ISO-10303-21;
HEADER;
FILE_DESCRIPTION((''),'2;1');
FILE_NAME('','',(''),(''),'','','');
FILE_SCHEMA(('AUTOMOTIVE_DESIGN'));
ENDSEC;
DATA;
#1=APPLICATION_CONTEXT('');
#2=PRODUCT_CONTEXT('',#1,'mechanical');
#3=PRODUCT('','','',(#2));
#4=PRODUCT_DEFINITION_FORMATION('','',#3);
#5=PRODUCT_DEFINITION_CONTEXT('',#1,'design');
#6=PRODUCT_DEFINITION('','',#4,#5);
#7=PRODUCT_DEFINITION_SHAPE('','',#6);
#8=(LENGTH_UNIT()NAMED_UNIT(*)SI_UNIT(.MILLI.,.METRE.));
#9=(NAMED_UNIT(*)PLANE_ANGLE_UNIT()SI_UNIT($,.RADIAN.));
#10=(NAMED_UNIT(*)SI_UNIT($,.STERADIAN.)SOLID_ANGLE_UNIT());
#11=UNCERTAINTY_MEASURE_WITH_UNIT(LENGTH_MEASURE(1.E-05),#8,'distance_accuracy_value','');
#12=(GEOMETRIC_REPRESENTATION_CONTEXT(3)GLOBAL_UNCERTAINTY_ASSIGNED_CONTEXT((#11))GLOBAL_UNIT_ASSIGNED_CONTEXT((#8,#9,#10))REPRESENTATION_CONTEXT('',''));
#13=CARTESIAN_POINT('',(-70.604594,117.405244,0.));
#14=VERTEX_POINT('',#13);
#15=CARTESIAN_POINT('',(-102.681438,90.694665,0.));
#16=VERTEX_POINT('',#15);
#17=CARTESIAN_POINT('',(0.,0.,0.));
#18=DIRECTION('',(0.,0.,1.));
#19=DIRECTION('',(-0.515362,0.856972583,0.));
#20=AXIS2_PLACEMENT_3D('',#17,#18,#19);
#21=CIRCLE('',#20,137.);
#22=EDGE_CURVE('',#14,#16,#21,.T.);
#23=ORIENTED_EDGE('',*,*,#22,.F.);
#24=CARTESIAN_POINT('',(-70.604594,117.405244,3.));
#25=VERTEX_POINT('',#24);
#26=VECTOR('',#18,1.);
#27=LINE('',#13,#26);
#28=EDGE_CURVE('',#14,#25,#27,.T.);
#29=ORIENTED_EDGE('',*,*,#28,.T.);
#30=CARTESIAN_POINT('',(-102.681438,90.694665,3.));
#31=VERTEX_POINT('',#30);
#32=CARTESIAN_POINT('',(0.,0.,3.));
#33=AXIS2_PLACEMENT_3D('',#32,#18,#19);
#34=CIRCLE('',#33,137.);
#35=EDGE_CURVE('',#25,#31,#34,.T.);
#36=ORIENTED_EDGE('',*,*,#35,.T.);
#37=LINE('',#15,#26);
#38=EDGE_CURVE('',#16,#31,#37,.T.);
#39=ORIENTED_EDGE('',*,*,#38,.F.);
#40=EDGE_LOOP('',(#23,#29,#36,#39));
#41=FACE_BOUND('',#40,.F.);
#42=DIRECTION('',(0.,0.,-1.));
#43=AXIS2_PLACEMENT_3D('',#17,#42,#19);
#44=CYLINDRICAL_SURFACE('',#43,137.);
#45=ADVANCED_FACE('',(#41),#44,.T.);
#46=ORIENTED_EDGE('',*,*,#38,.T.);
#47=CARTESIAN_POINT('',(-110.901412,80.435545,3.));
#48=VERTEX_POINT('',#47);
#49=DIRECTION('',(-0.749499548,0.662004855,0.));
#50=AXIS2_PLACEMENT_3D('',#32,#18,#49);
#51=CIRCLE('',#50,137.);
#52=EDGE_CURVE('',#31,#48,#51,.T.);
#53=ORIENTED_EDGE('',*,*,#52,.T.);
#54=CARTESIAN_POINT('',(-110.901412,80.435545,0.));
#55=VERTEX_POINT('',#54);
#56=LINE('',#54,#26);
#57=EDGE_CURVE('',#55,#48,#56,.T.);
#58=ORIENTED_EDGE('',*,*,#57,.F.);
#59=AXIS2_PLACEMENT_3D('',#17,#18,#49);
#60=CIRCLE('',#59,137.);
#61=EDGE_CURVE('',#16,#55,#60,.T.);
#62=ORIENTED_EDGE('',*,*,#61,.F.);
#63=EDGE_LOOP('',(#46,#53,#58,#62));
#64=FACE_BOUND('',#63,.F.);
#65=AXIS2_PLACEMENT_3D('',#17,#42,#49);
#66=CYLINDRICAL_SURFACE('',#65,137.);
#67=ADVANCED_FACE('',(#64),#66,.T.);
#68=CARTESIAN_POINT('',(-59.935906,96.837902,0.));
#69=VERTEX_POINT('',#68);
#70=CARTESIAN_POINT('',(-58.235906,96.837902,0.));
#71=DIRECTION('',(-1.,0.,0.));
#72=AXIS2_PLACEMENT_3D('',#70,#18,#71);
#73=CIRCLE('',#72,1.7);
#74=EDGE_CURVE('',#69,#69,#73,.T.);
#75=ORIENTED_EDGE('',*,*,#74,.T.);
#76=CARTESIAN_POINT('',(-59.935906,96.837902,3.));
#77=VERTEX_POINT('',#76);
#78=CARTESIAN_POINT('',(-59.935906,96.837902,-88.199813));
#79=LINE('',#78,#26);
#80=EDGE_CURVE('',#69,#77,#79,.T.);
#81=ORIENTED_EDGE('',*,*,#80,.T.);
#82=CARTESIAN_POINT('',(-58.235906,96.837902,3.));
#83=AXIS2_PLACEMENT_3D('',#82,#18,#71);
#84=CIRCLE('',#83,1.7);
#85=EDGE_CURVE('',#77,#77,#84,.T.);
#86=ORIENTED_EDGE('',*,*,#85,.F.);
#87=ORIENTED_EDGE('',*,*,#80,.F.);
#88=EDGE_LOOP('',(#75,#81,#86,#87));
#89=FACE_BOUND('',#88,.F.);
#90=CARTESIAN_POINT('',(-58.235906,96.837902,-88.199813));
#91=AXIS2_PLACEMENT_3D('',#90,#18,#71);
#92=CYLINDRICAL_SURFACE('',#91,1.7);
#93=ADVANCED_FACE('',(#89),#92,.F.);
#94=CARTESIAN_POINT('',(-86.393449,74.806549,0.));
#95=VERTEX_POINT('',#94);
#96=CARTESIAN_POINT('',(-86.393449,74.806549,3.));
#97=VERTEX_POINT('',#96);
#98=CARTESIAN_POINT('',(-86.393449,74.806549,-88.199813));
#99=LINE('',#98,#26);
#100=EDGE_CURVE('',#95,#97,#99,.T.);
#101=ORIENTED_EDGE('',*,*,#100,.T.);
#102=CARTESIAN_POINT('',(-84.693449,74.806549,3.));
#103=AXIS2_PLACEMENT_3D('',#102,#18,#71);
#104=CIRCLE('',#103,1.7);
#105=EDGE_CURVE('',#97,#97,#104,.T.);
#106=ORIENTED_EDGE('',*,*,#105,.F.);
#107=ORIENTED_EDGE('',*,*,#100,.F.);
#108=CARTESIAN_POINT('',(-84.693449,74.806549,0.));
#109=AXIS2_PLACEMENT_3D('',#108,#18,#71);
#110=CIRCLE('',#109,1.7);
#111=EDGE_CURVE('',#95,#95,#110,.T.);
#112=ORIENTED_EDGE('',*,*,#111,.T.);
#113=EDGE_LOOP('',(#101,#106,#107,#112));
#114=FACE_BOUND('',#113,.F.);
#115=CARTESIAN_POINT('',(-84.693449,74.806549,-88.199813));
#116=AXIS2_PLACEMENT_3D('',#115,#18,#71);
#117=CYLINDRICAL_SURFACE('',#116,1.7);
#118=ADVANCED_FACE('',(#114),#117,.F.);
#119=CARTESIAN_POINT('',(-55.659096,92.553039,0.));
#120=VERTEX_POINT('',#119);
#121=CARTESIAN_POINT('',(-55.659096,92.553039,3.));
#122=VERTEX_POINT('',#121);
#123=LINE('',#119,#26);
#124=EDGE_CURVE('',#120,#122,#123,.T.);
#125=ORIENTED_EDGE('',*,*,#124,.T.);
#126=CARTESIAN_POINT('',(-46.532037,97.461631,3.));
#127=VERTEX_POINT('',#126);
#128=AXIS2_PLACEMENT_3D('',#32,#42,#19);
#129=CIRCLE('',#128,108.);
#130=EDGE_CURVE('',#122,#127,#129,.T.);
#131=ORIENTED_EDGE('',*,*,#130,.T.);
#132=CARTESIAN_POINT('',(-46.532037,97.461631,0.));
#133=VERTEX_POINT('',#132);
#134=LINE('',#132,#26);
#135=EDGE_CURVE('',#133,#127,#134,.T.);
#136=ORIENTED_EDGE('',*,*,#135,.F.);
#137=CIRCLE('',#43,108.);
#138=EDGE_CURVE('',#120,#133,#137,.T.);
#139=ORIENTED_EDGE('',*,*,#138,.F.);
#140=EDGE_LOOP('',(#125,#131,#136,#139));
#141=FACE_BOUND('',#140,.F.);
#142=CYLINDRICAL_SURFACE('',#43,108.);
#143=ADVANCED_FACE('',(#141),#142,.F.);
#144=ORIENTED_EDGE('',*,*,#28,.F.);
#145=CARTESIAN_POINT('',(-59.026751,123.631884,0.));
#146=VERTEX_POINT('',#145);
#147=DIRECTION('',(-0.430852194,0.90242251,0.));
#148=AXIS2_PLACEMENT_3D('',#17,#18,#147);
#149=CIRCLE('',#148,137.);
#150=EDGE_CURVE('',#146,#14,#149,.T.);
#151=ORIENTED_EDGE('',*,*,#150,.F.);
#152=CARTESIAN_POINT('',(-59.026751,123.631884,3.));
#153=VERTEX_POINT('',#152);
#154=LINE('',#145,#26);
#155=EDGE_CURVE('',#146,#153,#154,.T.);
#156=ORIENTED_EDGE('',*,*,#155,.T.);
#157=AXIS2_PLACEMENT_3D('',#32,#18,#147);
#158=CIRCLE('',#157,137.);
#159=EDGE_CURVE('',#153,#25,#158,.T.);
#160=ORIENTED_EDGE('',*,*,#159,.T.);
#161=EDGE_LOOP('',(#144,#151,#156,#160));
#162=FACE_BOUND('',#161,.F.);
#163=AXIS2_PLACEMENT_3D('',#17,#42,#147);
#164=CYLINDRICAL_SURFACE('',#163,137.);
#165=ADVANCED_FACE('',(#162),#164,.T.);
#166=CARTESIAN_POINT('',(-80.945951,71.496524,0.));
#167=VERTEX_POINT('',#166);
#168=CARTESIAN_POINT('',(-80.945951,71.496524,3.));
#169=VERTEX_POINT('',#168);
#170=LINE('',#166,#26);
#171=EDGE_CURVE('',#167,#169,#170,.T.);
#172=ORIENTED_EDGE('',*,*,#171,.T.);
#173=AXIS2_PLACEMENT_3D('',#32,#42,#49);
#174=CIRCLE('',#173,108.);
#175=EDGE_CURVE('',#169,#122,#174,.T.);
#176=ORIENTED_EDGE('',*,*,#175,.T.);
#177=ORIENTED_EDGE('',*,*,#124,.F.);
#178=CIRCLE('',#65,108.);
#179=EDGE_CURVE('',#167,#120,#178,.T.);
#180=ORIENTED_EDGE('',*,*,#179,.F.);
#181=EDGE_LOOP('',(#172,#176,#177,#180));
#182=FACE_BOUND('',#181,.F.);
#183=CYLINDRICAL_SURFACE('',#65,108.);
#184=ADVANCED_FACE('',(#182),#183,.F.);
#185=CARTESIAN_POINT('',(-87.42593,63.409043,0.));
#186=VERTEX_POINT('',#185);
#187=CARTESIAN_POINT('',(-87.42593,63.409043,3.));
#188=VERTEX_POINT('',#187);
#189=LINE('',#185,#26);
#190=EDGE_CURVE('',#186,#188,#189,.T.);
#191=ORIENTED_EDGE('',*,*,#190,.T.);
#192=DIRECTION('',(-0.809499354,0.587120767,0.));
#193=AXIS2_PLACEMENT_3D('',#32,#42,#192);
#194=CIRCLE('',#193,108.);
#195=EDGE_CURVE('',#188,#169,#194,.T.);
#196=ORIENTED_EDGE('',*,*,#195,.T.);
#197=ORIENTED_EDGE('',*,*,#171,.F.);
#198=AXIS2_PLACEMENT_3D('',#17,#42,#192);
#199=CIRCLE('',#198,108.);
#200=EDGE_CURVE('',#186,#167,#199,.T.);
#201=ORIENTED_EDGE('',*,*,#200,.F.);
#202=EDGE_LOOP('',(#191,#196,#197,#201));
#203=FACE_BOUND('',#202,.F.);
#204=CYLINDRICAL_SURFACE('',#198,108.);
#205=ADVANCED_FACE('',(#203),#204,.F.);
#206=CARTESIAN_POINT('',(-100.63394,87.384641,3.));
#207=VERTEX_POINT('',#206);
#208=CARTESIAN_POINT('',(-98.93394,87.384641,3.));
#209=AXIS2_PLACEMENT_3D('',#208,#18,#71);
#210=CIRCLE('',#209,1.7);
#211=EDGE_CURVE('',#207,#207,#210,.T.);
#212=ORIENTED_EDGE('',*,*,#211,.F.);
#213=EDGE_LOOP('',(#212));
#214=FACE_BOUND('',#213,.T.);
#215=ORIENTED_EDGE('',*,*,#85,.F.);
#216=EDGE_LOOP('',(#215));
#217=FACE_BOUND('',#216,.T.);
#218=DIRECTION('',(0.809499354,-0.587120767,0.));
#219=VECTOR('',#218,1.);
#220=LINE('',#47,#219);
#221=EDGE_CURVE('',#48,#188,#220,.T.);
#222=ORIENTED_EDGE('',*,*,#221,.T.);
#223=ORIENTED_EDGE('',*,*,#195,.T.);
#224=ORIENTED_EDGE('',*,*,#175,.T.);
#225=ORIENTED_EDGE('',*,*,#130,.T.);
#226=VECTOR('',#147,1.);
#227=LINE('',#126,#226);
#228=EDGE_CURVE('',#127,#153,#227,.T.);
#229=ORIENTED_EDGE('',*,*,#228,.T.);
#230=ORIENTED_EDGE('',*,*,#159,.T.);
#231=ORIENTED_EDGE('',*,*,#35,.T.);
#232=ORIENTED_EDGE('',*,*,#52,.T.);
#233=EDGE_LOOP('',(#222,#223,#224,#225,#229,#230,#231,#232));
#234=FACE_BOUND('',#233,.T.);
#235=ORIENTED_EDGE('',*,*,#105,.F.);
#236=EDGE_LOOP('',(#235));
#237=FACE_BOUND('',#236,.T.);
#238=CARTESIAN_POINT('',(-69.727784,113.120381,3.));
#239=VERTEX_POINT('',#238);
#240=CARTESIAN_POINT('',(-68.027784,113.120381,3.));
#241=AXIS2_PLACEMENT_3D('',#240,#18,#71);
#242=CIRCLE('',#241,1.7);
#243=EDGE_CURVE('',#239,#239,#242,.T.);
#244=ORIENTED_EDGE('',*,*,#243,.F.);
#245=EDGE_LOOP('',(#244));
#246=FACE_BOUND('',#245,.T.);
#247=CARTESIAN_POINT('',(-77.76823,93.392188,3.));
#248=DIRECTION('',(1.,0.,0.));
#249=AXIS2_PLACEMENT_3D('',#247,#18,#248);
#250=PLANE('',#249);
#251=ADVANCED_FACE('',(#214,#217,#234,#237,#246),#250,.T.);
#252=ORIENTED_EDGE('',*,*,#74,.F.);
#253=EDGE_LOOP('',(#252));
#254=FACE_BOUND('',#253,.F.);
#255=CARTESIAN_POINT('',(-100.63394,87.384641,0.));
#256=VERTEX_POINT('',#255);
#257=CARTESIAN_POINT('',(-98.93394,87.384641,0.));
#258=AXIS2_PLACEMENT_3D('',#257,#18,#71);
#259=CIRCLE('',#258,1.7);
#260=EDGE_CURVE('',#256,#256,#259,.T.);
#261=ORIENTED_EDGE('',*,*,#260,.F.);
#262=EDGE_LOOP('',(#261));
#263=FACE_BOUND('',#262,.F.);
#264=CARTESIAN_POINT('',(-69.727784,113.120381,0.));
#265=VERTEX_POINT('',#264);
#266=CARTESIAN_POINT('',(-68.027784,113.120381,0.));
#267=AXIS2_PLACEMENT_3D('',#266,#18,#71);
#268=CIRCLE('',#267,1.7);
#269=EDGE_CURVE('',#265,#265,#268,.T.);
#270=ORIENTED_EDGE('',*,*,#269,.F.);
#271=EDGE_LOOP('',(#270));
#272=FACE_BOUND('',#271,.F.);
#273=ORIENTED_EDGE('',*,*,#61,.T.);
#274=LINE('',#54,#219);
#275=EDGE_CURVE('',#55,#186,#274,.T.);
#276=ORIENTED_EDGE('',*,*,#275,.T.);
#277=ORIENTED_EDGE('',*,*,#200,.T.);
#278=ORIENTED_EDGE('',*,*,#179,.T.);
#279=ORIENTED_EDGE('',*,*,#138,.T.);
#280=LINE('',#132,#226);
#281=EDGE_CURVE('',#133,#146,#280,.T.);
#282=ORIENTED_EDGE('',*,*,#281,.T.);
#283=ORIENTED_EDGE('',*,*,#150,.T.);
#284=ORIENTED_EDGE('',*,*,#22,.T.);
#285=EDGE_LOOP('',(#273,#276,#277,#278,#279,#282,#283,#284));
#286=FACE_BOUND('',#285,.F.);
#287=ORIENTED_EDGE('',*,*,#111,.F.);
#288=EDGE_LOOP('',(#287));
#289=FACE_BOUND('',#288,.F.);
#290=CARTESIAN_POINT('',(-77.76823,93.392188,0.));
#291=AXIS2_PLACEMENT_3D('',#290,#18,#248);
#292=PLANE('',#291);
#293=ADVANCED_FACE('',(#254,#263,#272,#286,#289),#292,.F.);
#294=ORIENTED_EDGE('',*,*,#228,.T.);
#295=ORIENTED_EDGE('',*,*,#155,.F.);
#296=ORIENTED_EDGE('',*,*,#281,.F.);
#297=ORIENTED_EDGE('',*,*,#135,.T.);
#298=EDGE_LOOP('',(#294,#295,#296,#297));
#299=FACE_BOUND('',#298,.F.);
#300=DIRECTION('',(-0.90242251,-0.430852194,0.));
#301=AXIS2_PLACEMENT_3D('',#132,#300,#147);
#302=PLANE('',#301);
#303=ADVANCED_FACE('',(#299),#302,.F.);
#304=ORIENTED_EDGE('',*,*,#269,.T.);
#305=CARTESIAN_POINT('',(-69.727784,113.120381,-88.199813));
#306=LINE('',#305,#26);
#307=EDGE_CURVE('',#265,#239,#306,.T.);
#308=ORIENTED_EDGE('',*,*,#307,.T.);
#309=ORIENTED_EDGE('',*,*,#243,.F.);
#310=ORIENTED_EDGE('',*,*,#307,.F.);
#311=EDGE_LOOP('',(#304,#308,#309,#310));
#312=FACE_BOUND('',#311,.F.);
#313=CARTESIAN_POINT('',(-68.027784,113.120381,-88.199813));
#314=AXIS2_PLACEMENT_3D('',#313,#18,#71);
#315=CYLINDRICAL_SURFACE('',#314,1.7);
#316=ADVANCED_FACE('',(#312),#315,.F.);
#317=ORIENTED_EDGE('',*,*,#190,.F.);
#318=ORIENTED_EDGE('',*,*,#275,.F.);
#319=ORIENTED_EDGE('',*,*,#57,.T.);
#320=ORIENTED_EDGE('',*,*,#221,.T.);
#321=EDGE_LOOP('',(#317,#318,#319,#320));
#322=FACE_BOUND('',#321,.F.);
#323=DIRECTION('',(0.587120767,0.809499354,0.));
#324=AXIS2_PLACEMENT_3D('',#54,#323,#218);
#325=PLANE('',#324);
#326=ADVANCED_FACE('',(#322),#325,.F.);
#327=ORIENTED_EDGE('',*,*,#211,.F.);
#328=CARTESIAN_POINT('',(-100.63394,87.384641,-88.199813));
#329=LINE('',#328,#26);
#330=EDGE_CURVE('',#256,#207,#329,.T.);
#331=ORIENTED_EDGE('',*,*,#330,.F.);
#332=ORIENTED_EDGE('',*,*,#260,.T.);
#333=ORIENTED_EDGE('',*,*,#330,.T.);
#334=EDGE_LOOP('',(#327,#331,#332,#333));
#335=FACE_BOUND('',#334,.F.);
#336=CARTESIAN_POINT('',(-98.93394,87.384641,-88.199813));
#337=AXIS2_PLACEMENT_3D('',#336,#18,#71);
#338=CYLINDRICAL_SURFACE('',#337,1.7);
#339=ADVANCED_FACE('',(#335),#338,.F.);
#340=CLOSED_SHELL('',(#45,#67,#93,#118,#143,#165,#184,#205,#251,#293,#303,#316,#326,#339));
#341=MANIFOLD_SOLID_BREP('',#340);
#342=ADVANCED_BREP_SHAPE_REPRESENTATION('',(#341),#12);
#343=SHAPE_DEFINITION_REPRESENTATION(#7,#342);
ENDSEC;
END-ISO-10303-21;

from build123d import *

# Parameters (mm, degrees)
F1_DEPTH = 3
F2_D     = 3.4


with BuildPart() as f1:
    # F0 (on Top) → F1 (new body)
    with BuildSketch(Plane.XY):
        with BuildLine():
            ThreePointArc((-55.6590960491, 92.5530389939), (-51.154476682, 95.1168729269), (-46.5320369414, 97.4616311072))
            Line((-46.5320369414, 97.4616311072), (-59.0267505646, 123.6318839045))
            ThreePointArc((-59.0267505646, 123.6318839045), (-64.8904009762, 120.6575147314), (-70.6045940623, 117.4052439089))
            ThreePointArc((-70.6045940623, 117.4052439089), (-87.6662762423, 105.278791833), (-102.6814380892, 90.6946650688))
            ThreePointArc((-102.6814380892, 90.6946650688), (-106.9145490542, 85.6637566334), (-110.9014115399, 80.4355451181))
            Line((-110.9014115399, 80.4355451181), (-87.4259302651, 63.4090428669))
            ThreePointArc((-87.4259302651, 63.4090428669), (-84.2830021741, 67.5305526745), (-80.9459511944, 71.4965242878))
            ThreePointArc((-80.9459511944, 71.4965242878), (-69.1091812713, 82.9935001311), (-55.6590960491, 92.5530389939))
        make_face()
    extrude(amount=F1_DEPTH)

    # F2 (through all)
    with Locations(Plane(origin=(0, 0, 0), x_dir=(1, 0, 0), z_dir=(0, 0, -1))):
        with Locations((-98.9339403487, -87.3846407962), (-84.6934489349, -74.8065485604), (-58.2359060514, -96.8379019102), (-68.02778406, -113.1203809925)):
            Hole(F2_D / 2)


solid = f1.part
